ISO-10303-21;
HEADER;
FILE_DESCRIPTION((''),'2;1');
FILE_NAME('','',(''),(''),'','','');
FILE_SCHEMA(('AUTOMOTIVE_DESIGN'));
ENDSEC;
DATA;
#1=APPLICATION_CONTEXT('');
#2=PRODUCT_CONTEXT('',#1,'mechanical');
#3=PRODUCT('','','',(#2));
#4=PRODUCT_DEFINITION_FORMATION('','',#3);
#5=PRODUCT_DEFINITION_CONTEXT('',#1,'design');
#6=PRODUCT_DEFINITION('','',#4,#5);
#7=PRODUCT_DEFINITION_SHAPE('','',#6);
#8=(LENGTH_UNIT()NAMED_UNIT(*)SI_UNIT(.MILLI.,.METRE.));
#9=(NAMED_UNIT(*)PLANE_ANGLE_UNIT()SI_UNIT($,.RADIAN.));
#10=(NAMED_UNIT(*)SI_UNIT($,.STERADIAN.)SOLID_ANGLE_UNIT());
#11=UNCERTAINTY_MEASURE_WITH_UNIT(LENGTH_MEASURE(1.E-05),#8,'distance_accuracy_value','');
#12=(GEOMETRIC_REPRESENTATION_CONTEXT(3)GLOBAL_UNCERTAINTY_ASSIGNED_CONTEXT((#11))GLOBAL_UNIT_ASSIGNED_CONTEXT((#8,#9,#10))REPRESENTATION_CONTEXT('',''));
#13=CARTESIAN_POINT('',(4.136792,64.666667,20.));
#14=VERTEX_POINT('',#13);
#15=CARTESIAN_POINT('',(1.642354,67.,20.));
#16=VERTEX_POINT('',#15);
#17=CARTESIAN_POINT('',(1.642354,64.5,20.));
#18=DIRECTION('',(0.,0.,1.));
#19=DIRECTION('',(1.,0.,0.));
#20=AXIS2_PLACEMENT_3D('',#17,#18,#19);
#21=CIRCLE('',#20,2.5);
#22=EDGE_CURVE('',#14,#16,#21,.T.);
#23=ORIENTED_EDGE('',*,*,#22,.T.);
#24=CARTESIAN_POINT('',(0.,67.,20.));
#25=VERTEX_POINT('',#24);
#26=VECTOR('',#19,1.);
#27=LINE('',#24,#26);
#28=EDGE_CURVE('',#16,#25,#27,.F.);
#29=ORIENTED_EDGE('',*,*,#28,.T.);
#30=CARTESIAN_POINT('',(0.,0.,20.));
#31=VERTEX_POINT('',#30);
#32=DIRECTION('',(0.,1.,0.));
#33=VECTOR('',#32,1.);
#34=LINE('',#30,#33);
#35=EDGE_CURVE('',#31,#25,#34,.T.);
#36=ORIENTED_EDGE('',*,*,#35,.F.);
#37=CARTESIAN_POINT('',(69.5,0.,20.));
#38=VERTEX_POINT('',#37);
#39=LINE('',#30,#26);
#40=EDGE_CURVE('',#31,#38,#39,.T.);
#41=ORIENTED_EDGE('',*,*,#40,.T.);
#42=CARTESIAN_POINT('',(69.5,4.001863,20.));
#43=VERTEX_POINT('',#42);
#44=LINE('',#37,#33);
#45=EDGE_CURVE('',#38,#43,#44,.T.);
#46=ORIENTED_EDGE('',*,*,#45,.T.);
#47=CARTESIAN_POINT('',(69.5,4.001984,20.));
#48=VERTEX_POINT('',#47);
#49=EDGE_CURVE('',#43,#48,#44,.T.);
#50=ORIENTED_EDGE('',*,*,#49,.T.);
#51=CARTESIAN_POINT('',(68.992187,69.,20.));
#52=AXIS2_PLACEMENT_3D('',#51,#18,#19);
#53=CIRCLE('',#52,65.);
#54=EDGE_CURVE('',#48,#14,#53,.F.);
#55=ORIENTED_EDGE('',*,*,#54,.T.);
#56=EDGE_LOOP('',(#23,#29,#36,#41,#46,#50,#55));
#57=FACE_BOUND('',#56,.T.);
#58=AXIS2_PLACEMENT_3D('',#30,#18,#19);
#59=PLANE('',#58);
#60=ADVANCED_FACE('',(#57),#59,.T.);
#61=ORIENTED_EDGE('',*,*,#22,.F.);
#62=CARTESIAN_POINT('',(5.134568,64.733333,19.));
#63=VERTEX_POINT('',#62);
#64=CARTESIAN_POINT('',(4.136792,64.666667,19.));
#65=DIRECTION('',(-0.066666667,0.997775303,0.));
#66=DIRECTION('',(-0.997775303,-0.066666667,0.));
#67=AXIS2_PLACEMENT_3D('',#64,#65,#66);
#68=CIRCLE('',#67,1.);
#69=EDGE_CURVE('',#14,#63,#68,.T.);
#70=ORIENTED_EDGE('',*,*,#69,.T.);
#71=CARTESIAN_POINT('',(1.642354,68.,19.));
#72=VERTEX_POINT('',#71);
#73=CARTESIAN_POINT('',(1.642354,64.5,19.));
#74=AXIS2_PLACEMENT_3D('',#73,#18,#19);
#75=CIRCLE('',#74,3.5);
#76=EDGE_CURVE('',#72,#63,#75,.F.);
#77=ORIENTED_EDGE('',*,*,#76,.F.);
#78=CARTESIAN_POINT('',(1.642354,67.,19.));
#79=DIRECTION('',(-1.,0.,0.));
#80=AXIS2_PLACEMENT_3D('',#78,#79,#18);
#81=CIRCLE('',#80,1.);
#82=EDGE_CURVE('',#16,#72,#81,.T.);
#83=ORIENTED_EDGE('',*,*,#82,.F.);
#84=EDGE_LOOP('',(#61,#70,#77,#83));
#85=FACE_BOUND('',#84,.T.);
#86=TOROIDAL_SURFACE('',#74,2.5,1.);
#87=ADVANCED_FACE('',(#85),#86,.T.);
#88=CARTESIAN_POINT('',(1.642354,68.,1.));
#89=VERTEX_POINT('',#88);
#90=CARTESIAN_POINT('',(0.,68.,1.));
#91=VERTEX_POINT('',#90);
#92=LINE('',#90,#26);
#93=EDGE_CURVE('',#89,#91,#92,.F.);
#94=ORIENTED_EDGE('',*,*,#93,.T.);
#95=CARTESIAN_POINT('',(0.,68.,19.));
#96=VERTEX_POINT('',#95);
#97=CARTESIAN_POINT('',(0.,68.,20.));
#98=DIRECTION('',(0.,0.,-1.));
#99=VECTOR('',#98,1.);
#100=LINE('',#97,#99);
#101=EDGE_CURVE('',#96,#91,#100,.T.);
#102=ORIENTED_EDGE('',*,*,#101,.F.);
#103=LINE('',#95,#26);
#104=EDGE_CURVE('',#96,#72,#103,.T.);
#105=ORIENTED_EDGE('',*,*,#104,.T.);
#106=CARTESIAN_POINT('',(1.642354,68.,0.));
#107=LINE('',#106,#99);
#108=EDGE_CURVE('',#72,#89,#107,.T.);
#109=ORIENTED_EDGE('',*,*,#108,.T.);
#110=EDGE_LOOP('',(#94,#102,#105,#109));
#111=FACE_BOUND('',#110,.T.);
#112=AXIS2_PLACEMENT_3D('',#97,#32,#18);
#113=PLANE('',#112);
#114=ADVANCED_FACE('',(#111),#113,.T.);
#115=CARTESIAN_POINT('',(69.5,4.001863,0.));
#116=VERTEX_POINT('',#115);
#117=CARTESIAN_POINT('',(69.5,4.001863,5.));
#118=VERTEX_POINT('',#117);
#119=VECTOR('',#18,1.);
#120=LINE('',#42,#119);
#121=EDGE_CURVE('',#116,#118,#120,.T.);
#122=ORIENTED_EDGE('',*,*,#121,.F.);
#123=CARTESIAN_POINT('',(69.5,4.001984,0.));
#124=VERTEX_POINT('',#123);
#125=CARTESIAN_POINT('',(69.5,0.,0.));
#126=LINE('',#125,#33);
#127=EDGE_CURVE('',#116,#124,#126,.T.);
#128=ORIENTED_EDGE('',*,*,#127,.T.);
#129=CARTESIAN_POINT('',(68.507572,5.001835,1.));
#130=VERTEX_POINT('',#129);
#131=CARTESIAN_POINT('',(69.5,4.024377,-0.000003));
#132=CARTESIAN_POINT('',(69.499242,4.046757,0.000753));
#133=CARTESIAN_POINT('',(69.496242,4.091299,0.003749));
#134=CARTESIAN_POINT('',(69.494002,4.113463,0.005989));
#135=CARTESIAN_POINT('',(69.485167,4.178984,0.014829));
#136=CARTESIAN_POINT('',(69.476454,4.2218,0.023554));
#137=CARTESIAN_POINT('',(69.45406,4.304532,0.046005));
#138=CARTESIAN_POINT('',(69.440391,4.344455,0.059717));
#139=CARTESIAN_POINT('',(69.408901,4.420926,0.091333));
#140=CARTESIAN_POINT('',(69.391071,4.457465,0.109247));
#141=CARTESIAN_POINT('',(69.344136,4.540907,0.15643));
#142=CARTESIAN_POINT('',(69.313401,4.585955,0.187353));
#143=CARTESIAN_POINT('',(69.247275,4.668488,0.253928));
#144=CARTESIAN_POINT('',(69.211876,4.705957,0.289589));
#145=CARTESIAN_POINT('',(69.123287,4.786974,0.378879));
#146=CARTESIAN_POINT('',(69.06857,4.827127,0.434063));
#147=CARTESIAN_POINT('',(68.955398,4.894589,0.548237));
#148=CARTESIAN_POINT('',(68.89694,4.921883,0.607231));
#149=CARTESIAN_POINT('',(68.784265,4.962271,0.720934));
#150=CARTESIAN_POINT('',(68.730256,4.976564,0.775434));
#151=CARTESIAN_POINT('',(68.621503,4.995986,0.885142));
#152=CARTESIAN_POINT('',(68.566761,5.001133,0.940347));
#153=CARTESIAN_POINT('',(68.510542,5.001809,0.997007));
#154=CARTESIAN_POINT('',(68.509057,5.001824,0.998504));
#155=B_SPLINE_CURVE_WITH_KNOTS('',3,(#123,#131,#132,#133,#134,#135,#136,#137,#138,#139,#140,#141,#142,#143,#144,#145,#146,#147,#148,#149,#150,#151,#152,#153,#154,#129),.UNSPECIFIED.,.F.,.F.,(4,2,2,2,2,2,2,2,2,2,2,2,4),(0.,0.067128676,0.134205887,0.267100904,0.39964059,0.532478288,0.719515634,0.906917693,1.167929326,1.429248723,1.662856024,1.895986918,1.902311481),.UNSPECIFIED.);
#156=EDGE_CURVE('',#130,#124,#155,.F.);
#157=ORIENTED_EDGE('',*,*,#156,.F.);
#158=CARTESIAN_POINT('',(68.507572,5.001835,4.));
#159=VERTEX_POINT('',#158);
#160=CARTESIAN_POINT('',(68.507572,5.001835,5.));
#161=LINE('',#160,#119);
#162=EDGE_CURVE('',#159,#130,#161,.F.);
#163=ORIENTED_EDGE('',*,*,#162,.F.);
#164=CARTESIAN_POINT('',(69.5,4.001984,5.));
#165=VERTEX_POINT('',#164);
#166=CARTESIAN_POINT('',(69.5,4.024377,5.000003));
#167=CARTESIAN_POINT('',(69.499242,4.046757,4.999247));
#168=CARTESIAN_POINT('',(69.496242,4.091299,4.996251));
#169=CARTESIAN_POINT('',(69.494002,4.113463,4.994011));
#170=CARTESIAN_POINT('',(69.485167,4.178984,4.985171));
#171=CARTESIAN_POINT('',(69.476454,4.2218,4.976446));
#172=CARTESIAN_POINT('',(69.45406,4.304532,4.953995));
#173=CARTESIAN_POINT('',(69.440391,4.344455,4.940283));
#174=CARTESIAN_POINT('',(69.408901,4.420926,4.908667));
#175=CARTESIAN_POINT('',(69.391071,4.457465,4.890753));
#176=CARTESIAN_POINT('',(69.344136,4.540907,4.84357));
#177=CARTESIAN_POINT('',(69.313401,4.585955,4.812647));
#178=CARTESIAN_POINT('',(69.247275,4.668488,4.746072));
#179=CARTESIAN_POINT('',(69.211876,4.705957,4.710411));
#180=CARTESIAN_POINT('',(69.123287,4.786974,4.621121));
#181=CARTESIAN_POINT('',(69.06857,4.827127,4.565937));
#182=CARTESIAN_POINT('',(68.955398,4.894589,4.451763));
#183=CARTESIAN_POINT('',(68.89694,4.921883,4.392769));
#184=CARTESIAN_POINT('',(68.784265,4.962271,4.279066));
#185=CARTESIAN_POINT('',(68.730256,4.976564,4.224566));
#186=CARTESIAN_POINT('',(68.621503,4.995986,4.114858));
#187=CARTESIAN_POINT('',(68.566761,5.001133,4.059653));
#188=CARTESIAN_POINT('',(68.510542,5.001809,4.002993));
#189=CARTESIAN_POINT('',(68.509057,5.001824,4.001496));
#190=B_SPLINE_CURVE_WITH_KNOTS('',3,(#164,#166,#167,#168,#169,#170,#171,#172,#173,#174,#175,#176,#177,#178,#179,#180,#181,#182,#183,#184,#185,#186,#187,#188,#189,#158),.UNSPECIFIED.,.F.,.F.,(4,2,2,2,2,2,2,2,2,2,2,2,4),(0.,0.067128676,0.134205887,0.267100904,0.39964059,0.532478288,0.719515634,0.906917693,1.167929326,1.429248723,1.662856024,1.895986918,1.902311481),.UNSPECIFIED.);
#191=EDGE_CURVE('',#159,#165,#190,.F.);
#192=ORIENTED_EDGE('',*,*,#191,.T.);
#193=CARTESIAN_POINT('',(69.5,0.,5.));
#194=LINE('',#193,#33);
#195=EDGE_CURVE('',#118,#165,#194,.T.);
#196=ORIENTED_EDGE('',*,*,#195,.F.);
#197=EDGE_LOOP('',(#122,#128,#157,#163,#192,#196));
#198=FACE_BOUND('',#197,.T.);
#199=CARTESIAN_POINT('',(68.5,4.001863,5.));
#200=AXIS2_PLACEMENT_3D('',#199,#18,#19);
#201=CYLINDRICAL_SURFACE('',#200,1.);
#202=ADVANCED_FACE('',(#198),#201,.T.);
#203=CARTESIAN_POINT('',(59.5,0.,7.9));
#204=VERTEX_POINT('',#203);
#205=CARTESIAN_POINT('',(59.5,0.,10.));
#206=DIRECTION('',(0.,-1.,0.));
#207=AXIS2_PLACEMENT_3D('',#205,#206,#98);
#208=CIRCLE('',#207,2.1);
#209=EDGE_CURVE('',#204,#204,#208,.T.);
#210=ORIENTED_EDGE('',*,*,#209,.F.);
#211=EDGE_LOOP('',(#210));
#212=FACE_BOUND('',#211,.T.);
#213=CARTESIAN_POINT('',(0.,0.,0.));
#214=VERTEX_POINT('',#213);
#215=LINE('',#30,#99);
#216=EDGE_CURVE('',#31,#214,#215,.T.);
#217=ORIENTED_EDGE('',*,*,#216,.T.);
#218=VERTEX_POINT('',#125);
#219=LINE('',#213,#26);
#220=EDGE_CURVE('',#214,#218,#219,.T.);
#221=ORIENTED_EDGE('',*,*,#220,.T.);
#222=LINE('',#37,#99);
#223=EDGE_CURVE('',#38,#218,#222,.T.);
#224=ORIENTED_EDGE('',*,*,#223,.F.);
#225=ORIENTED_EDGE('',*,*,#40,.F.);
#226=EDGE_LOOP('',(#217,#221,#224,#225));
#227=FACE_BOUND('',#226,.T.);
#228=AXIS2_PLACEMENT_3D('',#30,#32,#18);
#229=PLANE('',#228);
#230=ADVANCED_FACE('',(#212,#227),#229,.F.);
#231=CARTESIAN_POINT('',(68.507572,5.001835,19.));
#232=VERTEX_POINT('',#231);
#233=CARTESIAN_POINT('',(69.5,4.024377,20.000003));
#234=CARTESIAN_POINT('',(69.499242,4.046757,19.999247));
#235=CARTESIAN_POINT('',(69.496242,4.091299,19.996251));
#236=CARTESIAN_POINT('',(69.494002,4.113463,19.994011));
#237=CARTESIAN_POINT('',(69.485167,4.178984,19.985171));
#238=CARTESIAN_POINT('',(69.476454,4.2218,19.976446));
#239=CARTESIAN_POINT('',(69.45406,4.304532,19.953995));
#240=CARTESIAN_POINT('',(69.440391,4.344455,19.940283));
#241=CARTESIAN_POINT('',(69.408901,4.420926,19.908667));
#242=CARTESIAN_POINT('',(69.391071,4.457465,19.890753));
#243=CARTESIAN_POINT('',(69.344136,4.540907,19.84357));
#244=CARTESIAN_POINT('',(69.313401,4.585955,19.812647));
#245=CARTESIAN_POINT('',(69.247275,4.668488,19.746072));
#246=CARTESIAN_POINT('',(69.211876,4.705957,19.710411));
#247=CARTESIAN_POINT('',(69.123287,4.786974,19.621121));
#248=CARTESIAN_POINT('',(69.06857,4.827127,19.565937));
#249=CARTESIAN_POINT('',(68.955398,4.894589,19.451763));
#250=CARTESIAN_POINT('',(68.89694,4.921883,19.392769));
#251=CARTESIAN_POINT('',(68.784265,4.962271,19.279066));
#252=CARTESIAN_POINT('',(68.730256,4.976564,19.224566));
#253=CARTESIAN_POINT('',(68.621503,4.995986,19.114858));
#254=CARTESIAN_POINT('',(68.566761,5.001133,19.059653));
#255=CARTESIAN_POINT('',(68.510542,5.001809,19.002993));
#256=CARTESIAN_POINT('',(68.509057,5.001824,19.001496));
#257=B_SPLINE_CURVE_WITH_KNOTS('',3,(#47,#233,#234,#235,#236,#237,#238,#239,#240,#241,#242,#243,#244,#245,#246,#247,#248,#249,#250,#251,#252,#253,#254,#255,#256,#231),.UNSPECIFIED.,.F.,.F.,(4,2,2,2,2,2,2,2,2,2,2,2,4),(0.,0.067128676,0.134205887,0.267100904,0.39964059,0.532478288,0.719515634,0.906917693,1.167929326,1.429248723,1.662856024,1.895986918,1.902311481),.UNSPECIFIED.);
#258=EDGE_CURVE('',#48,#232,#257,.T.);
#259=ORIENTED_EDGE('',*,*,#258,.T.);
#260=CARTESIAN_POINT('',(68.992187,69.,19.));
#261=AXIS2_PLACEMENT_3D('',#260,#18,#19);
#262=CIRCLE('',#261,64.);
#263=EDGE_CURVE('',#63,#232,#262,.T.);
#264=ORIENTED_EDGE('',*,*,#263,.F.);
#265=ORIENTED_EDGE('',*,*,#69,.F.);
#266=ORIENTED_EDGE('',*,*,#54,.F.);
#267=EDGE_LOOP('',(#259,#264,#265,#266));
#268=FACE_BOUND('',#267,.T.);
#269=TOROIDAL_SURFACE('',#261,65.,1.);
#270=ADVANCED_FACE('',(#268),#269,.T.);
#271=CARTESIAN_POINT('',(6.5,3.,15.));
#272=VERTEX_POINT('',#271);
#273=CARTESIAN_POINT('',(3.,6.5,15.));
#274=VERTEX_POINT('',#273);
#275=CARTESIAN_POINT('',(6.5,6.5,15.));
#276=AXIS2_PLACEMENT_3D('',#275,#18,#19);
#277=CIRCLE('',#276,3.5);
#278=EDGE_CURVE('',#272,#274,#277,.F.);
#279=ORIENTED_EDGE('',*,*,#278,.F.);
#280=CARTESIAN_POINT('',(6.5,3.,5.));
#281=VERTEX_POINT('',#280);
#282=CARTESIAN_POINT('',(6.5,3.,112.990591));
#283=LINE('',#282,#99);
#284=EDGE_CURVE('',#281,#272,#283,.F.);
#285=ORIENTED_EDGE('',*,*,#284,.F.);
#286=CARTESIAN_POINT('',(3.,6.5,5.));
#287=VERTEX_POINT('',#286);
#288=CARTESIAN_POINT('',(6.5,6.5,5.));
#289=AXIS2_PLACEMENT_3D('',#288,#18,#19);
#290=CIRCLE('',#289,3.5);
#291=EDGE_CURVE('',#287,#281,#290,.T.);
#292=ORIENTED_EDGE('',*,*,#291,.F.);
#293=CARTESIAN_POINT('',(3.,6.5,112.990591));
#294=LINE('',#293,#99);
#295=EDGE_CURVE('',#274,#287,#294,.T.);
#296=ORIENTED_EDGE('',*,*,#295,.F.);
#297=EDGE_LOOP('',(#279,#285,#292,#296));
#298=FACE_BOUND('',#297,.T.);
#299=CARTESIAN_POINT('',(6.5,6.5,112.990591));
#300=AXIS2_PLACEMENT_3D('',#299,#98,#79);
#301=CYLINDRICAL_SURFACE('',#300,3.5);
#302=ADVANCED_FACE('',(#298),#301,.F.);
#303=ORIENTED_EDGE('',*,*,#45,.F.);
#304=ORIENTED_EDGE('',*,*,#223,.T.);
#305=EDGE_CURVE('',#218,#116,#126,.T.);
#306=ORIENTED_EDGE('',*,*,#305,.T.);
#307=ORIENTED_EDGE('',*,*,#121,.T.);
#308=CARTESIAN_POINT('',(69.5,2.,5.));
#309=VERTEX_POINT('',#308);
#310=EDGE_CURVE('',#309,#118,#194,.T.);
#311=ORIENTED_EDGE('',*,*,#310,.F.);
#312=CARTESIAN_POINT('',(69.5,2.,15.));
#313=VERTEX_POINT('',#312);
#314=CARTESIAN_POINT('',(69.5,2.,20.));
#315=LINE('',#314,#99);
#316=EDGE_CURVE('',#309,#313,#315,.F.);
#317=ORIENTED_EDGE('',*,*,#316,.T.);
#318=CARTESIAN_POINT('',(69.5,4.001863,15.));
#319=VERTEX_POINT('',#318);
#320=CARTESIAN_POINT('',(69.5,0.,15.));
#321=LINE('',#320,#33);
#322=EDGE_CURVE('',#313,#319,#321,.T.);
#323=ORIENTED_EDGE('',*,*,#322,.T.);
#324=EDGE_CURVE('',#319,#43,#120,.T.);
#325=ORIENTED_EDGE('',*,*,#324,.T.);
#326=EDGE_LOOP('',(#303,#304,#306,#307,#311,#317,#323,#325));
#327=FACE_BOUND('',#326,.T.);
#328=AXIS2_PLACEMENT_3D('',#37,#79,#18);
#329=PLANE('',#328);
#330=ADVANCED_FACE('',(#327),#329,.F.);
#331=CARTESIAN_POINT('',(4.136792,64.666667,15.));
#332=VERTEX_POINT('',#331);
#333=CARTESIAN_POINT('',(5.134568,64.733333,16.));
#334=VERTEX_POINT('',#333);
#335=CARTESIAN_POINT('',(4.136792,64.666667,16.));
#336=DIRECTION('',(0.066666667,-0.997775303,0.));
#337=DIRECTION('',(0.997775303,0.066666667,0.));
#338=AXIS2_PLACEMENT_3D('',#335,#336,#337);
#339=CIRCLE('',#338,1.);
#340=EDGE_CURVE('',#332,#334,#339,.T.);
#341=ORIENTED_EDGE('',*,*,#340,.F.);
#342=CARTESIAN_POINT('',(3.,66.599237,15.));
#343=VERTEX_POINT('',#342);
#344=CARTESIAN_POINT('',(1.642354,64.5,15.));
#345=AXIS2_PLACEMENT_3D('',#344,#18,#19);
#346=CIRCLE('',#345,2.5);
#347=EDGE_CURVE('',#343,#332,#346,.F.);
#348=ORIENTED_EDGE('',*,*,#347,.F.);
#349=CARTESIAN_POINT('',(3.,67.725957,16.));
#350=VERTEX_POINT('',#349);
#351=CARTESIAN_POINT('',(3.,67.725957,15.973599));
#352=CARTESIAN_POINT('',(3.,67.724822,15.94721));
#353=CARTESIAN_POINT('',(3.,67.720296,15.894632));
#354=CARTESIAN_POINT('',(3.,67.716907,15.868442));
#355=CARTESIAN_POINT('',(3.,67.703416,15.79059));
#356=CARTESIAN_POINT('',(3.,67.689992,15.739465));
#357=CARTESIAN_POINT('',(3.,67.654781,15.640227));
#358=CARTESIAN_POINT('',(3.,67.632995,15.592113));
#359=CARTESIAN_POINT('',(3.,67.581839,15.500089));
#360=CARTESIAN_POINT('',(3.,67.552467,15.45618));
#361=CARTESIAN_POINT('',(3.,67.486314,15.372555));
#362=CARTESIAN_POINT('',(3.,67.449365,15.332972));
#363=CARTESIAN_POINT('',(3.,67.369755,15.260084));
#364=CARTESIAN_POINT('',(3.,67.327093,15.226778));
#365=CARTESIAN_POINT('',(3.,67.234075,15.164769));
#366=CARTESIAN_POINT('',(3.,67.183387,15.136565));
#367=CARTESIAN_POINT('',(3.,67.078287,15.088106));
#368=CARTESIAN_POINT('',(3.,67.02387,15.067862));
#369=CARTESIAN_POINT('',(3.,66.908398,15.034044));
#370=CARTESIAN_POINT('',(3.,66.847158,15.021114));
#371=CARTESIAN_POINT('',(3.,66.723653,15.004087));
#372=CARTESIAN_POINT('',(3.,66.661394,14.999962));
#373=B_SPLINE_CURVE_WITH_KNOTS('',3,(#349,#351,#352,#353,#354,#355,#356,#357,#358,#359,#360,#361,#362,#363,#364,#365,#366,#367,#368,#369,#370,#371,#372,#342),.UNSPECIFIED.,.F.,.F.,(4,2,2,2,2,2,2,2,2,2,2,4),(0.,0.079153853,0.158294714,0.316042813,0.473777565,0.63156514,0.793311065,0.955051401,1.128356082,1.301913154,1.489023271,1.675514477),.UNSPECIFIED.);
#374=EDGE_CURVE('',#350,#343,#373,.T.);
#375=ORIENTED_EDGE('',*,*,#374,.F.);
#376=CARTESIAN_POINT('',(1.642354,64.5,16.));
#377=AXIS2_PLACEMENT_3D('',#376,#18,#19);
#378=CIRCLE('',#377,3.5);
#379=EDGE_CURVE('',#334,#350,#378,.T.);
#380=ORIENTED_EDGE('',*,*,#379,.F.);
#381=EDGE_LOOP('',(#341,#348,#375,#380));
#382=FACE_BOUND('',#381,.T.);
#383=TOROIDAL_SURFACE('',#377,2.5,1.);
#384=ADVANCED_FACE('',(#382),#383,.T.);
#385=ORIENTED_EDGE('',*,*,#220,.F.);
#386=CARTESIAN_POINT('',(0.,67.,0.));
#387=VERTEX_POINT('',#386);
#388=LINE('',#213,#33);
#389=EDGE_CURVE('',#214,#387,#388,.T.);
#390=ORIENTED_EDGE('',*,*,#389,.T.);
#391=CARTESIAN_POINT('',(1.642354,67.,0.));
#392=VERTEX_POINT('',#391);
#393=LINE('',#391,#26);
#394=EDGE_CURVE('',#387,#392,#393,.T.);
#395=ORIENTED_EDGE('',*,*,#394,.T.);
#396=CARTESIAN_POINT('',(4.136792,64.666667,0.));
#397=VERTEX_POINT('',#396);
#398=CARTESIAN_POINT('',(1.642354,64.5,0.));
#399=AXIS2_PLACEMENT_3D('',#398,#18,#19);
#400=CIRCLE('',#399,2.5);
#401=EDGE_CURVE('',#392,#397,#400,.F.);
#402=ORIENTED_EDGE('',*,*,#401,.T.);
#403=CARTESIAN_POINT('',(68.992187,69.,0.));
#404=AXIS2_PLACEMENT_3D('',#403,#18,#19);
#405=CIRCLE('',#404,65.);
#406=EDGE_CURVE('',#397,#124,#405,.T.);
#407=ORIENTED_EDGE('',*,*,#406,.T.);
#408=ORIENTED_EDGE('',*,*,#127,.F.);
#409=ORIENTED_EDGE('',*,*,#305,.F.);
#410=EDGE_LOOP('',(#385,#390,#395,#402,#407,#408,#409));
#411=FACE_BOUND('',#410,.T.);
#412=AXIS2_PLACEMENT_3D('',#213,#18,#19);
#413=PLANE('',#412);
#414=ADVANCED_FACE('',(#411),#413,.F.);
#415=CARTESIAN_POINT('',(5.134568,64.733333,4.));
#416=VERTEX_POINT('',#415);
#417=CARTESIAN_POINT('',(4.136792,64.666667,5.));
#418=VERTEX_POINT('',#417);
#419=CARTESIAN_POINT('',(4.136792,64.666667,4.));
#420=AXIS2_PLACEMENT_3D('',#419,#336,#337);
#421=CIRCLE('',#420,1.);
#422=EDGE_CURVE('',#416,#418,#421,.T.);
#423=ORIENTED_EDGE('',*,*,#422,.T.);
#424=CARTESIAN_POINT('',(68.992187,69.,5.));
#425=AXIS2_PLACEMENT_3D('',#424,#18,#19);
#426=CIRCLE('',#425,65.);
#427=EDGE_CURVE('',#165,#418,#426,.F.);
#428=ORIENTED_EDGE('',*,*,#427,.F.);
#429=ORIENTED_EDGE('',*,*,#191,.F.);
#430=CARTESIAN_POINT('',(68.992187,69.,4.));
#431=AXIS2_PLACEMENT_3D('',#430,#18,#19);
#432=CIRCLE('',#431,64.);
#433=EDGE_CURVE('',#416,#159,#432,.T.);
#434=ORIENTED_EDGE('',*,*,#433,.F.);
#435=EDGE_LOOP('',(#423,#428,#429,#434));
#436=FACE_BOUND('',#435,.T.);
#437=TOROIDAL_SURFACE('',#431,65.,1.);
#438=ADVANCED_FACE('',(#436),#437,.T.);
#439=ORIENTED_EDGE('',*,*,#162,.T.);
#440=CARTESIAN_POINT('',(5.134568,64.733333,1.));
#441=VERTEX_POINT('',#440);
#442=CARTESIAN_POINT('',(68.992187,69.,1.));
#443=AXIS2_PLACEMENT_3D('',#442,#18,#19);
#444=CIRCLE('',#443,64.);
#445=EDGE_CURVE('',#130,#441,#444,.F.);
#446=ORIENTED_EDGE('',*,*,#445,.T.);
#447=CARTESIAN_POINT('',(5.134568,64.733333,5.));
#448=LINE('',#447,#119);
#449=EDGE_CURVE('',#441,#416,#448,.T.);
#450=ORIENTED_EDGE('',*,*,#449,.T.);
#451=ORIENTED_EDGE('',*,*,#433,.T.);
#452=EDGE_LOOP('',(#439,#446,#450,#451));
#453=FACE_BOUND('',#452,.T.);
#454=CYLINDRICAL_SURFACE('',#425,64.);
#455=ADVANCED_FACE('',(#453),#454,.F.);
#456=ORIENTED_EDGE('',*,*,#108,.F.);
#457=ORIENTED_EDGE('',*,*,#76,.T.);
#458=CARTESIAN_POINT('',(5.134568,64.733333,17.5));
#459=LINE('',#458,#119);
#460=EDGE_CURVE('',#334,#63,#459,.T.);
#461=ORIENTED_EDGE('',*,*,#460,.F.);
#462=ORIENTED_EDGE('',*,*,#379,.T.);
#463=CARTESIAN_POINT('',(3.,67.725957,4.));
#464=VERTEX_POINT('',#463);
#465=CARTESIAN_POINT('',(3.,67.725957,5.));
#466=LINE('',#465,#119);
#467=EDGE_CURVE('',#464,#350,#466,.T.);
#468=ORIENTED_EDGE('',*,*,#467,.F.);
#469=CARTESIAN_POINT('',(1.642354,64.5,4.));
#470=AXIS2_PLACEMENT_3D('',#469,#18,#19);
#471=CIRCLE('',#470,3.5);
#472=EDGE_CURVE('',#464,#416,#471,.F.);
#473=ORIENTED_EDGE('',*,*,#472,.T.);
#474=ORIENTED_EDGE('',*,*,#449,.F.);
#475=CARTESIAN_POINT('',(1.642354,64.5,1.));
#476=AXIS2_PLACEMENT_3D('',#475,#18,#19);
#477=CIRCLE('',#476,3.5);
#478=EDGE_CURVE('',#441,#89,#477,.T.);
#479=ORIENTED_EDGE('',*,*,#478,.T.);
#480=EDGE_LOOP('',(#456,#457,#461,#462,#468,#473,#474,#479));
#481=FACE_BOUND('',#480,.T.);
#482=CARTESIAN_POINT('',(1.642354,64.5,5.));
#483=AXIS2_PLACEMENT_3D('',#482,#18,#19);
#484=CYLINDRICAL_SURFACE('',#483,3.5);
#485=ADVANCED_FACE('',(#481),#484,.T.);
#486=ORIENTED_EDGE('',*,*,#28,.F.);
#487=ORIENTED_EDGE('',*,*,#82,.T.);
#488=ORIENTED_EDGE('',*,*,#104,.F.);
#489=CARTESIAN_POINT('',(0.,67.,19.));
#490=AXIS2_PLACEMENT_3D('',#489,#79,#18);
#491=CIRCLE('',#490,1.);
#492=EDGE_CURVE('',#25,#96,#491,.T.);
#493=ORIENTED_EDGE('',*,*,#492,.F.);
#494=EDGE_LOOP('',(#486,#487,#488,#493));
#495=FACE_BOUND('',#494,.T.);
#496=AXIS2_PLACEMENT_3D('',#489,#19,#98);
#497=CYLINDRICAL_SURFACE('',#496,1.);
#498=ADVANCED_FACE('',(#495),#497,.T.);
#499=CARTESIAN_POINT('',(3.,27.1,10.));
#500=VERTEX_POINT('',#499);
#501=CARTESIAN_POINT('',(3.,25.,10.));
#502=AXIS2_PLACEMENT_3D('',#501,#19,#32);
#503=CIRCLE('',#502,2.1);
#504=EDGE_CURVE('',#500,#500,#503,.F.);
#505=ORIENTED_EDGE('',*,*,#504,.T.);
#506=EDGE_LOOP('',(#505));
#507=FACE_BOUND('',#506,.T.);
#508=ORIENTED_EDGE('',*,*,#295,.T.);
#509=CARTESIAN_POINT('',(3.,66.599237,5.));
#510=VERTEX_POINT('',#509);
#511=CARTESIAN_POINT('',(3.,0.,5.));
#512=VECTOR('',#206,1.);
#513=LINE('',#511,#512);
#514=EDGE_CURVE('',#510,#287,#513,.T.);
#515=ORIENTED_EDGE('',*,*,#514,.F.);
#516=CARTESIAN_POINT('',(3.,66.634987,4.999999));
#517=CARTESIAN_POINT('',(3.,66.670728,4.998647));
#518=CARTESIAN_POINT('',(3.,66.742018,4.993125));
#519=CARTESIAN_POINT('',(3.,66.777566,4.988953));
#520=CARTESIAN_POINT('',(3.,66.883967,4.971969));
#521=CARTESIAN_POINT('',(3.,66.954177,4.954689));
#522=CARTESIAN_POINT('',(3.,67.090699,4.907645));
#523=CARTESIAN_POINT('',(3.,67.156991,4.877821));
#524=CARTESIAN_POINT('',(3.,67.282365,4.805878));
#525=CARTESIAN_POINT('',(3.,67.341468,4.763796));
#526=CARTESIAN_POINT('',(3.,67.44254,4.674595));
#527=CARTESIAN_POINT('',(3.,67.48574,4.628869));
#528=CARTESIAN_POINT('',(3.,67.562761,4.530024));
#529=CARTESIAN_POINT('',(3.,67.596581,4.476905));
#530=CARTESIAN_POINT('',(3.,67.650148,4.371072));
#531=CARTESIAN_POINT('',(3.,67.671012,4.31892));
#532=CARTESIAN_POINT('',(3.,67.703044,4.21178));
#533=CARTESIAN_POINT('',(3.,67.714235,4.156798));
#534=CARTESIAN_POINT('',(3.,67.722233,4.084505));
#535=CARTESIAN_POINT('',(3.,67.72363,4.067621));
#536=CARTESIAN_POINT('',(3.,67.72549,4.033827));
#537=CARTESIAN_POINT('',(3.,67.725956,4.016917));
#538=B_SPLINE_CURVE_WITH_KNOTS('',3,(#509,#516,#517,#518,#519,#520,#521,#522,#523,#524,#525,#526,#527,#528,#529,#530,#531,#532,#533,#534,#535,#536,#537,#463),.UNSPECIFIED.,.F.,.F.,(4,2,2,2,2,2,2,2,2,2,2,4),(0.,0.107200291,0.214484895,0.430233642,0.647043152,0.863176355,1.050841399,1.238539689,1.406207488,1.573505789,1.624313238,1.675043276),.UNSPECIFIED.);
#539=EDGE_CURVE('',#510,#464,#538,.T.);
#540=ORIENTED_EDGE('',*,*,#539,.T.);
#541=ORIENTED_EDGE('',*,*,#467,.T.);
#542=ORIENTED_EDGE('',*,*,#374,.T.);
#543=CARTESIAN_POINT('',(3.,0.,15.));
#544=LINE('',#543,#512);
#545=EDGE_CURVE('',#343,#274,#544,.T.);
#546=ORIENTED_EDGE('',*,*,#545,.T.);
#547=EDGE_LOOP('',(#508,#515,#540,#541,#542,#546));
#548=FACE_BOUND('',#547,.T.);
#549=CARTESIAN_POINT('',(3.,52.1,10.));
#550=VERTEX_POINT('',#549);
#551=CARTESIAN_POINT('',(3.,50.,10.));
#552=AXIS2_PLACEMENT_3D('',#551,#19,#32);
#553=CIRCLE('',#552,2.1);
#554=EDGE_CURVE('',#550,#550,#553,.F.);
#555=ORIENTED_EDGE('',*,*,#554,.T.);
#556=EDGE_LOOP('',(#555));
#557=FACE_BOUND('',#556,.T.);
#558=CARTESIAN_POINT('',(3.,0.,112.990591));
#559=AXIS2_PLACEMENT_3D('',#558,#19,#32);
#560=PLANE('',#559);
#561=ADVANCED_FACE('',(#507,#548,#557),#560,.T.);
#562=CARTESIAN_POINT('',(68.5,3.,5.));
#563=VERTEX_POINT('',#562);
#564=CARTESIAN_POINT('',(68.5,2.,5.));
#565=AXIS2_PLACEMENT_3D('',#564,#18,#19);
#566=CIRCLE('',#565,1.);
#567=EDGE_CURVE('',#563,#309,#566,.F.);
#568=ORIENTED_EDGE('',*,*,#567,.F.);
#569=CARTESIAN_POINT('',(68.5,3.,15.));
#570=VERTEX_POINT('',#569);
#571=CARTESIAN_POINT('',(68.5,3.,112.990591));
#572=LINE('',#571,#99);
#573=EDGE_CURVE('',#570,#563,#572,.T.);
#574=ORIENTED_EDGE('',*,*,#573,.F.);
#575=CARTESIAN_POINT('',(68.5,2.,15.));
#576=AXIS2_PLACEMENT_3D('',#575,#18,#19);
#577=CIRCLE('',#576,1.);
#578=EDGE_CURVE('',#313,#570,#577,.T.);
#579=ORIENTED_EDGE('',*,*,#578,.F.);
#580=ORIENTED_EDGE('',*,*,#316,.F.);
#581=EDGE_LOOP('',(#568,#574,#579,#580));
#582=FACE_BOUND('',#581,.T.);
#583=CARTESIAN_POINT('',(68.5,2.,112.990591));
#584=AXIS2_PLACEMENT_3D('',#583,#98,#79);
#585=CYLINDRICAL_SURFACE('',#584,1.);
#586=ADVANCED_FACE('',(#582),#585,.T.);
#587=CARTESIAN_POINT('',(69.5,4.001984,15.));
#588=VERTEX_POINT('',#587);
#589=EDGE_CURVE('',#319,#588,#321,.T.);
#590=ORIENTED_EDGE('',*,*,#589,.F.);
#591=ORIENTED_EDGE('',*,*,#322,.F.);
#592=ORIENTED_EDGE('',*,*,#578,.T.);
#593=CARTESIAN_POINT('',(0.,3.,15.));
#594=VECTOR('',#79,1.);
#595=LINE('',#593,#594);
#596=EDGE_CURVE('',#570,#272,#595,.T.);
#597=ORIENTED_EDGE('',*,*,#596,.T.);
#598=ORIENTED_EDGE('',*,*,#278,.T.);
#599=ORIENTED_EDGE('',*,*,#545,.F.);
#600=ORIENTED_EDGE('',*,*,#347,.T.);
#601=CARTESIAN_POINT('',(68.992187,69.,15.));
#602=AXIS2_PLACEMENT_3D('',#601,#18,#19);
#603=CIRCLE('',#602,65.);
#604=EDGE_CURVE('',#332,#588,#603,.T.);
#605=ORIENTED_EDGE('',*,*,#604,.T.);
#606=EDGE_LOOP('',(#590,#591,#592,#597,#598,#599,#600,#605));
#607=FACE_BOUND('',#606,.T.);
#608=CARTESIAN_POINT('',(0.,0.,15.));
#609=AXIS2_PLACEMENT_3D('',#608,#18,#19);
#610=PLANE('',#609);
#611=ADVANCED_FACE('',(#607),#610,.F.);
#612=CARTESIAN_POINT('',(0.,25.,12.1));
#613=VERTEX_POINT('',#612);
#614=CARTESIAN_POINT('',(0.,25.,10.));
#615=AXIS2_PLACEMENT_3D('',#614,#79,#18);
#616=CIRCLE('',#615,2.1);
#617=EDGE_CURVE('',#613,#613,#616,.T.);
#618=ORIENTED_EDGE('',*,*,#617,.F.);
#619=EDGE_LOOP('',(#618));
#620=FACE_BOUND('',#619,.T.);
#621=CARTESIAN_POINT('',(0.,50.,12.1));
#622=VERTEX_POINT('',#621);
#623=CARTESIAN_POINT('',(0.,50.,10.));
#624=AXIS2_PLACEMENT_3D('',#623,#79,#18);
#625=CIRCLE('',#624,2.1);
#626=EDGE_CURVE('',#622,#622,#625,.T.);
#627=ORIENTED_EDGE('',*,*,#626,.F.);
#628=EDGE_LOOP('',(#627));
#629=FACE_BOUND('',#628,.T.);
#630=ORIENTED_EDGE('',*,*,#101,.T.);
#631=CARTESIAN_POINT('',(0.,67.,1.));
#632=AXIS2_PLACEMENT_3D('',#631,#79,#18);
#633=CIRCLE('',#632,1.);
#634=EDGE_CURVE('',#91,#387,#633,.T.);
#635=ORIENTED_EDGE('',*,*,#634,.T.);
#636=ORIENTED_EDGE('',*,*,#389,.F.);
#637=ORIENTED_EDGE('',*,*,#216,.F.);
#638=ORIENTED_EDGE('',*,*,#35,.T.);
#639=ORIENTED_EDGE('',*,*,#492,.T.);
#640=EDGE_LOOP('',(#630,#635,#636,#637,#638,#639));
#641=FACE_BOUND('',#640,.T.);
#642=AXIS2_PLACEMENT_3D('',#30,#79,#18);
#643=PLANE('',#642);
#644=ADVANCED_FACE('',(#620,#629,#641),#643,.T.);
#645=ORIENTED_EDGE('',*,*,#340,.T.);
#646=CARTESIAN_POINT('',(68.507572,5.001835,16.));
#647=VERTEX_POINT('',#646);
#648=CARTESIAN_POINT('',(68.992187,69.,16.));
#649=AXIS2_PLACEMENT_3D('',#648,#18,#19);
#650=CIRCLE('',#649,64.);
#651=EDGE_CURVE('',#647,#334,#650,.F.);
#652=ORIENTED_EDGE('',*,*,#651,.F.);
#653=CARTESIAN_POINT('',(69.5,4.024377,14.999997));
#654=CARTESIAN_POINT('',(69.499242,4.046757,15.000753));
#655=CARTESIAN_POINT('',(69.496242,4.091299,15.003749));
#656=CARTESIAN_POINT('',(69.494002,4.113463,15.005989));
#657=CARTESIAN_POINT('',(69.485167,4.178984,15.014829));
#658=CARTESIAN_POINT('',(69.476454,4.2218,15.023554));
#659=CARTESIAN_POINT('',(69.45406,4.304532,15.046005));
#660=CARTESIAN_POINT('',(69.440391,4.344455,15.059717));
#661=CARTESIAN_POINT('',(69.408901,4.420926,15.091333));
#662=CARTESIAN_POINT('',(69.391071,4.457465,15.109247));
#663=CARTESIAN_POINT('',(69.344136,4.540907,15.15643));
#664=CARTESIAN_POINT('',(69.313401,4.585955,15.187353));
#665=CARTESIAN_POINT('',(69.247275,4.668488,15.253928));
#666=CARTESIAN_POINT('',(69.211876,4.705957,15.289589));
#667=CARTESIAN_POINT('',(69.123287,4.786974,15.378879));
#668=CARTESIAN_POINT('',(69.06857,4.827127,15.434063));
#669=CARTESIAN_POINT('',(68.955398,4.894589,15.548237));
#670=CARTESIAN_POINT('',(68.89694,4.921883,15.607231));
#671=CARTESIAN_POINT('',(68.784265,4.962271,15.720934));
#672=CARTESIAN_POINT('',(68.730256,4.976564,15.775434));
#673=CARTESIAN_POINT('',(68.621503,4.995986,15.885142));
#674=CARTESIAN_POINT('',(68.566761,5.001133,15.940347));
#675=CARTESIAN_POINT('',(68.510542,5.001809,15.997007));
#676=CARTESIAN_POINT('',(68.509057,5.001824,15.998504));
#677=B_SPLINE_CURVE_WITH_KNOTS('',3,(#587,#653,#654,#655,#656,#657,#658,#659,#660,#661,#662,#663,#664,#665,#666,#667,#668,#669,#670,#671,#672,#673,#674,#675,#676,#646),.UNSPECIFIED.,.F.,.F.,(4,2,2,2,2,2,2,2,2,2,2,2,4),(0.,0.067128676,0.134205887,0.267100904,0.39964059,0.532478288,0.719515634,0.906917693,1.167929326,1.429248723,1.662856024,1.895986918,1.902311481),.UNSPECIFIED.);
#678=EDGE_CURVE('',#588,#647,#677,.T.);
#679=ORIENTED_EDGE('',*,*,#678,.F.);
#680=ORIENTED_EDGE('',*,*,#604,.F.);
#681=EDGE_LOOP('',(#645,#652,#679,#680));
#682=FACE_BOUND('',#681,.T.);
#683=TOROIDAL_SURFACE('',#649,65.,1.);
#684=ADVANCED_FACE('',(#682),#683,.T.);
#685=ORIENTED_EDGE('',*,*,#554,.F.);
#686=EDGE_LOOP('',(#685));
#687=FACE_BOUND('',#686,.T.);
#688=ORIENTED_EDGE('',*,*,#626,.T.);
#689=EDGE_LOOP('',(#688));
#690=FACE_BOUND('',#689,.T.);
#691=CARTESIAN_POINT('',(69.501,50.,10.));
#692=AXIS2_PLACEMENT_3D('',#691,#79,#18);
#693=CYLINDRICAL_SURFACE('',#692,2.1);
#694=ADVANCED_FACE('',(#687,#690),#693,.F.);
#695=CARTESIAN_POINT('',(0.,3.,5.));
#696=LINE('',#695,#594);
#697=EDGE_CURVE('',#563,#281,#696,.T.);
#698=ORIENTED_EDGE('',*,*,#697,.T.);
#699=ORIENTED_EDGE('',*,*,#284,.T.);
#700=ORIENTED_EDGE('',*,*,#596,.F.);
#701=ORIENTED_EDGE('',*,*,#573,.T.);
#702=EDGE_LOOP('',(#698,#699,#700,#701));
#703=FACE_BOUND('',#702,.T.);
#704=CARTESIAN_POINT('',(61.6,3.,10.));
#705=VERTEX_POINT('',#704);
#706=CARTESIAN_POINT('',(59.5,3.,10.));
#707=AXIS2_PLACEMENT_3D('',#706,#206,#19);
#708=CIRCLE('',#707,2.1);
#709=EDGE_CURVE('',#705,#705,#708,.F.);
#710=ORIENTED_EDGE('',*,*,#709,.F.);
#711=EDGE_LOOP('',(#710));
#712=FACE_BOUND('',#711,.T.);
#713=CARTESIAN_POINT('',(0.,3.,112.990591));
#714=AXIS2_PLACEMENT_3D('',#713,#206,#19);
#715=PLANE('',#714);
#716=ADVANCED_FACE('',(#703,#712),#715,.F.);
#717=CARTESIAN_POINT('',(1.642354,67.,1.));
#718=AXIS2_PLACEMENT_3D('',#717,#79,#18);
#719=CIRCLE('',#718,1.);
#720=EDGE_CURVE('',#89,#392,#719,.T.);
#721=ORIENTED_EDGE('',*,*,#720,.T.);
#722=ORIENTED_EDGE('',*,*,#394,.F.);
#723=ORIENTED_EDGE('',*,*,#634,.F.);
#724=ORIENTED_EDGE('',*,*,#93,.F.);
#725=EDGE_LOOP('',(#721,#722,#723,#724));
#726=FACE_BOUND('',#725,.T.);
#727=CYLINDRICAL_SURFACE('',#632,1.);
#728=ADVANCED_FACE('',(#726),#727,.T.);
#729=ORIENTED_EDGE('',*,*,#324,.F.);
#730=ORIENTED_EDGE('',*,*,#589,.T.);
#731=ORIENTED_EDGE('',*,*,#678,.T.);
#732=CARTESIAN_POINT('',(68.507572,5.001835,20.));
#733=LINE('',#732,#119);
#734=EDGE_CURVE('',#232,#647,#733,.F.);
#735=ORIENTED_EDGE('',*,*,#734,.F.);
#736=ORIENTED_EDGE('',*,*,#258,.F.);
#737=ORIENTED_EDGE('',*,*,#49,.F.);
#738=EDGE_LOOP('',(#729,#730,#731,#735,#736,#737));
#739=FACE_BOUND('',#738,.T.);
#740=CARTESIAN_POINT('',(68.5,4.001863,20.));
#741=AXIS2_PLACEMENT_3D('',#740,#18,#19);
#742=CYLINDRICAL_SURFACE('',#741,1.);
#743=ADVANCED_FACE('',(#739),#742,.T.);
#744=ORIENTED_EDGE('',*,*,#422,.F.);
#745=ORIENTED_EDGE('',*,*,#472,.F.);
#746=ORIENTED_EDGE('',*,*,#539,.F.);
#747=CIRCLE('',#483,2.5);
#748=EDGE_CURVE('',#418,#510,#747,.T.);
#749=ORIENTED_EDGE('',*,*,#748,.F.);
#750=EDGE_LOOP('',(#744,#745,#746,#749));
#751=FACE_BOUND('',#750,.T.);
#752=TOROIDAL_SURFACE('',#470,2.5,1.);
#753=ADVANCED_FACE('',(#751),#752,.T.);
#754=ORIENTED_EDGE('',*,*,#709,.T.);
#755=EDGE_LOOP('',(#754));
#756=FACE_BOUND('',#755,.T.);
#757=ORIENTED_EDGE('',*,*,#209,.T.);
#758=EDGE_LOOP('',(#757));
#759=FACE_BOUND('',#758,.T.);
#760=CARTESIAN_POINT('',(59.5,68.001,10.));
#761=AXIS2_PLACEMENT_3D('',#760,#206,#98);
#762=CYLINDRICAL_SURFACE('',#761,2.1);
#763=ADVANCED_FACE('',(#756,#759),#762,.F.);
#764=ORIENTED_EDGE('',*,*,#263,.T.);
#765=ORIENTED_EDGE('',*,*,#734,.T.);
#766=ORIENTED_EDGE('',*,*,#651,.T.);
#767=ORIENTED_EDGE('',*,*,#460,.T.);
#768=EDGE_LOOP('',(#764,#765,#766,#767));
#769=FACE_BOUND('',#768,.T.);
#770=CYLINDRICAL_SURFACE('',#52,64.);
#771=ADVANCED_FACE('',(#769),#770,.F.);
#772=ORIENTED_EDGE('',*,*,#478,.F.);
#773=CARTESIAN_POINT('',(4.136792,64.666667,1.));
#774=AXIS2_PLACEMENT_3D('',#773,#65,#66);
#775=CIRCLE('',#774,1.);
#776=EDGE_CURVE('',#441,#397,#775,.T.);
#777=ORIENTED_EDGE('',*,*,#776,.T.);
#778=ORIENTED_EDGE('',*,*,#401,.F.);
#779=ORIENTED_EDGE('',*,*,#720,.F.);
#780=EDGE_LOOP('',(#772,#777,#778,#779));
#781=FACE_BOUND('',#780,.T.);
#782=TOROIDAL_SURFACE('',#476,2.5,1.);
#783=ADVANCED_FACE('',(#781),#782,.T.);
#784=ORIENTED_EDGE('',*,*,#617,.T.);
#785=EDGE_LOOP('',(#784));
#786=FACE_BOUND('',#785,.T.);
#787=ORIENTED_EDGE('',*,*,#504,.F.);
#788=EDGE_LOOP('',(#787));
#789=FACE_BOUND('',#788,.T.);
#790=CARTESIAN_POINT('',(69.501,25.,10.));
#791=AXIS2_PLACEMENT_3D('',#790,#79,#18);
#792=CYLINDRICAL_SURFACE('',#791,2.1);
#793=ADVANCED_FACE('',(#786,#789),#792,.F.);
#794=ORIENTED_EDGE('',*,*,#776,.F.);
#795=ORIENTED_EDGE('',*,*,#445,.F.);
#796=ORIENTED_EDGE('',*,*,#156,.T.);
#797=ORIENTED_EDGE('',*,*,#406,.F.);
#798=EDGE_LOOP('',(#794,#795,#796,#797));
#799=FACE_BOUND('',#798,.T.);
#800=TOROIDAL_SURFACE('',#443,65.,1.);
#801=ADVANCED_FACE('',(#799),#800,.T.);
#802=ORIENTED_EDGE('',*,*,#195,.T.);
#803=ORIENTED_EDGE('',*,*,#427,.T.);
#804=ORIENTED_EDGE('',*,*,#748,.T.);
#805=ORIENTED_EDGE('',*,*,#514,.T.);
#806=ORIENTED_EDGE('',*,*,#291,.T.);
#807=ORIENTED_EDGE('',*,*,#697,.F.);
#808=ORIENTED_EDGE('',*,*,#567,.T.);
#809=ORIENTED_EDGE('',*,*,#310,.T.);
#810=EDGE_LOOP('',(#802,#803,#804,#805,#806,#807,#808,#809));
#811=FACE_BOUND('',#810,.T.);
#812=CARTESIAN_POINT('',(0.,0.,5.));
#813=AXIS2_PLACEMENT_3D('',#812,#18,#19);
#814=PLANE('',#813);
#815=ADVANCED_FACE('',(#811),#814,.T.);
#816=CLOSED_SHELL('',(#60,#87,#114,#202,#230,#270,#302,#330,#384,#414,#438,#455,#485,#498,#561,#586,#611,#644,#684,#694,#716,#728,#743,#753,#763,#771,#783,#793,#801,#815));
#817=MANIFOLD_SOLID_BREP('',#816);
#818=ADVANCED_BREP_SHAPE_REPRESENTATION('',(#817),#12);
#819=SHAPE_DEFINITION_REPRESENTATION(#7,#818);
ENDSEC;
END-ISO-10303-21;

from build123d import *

# Parameters (mm, degrees)
BOSS_EXTRUDE1_DEPTH = 20
CUT_EXTRUDE1_DEPTH  = 15
BOSS_EXTRUDE2_DEPTH = 5
CUT_EXTRUDE2_REACH  = 101.269
SKETCH2_R           = 2.100000000000004
CUT_EXTRUDE3_REACH  = 101.269
SKETCH3_R           = 2.100000000000001
SKETCH3_R_2         = 2.099999999999995
FILLET2_R           = 64
FILLET3_START       = -1
FILLET3_DEPTH       = 22
FILLET3_START_2     = 2.0548
FILLET3_2_DEPTH     = 16
FILLET4_R           = 1


with BuildPart() as part:
    # Sketch1 → Boss-Extrude1 (new body)
    with BuildSketch(Plane.XY):
        Polygon((69.5, 5.000000000000004), (5, 5), (5.000000000000004, 67.99999999999999), (0, 68), (0, 0), (69.49999999999999, 0), align=None)
    extrude(amount=BOSS_EXTRUDE1_DEPTH)

    # Sketch1<3> → Cut-Extrude1 (cut)
    with BuildSketch(Plane.XY):
        Polygon((69.5, 5.000000000000004), (5, 5), (5.000000000000004, 67.99999999999999), (3.0000000000000027, 68), (3.000000000000001, 3), (69.5, 3.000000000000002), align=None)
    extrude(amount=CUT_EXTRUDE1_DEPTH, mode=Mode.SUBTRACT)

    # Sketch1<4> → Boss-Extrude2 (add)
    with BuildSketch(Plane.XY):
        Polygon((69.5, 5.000000000000004), (5, 5), (5.000000000000004, 67.99999999999999), (3.0000000000000027, 68), (3.000000000000001, 3), (69.5, 3.000000000000002), align=None)
    extrude(amount=BOSS_EXTRUDE2_DEPTH)

    # Sketch2 → Cut-Extrude2 (cut, up to next)
    with BuildSketch(Plane.XZ, mode=Mode.PRIVATE) as cut_extrude2_sk1:
        with Locations(Location((59.5, 10, 0), (0, 0, 270))):
            Circle(SKETCH2_R)
    cut_extrude2_tool1 = extrude(cut_extrude2_sk1.sketch, amount=-CUT_EXTRUDE2_REACH, mode=Mode.PRIVATE) & part.part
    add(cut_extrude2_tool1.solids().sort_by_distance((59.5, 0, 10))[0], mode=Mode.SUBTRACT)

    # Sketch3 → Cut-Extrude3 (cut, up to next)
    with BuildSketch(Plane.ZY, mode=Mode.PRIVATE) as cut_extrude3_sk1:
        with Locations((10, 24.999999999999996)):
            Circle(SKETCH3_R)
    cut_extrude3_tool1 = extrude(cut_extrude3_sk1.sketch, amount=-CUT_EXTRUDE3_REACH, mode=Mode.PRIVATE) & part.part
    # Sketch3 → Cut-Extrude3 (cut, up to next)
    with BuildSketch(Plane.ZY, mode=Mode.PRIVATE) as cut_extrude3_sk2:
        with Locations((10, 50)):
            Circle(SKETCH3_R_2)
    cut_extrude3_tool2 = extrude(cut_extrude3_sk2.sketch, amount=-CUT_EXTRUDE3_REACH, mode=Mode.PRIVATE) & part.part
    add(cut_extrude3_tool1.solids().sort_by_distance((0, 25, 10))[0], mode=Mode.SUBTRACT)
    add(cut_extrude3_tool2.solids().sort_by_distance((0, 50, 10))[0], mode=Mode.SUBTRACT)

    # Fillet2
    # the kernel refuses this fillet: 64 mm, written as the material it adds along each edge
    with BuildSketch(Plane(origin=(5.000000000000001, 5, -144.98046755776159), x_dir=(1, 0, 0), z_dir=(0, 0, 1))) as fillet2_piece_1_section:
        with BuildLine():
            CenterArc((63.992187023104634, 64), FILLET2_R, 180.89528298657015, 89.10471701342988)
            Line((6.22e-15, 62.999999999999986), (-1.2798437404620864, 62.97999999999999))
            ThreePointArc((-1.2798437404620864, 62.97999999999999), (-1.2799999999999976, 31.499999999999993), (-1.2800000000000002, 0))
            Line((-1.2800000000000002, 0), (0, -1.2800000000000002))
            Line((0, -1.2800000000000002), (63.992187023104634, -1.2800000000000002))
            Line((63.992187023104634, -1.2800000000000002), (63.992187023104634, 0))
        make_face()
    fillet2_piece_1 = extrude(amount=164.98046755776159, mode=Mode.PRIVATE)
    fillet2_piece_1 = split(fillet2_piece_1, bisect_by=Plane(origin=(5.000000000000001, 5, 0), z_dir=(0, 0, 1)), keep=Keep.TOP, mode=Mode.PRIVATE)
    fillet2_piece_1 = split(fillet2_piece_1, bisect_by=Plane(origin=(5.000000000000001, 5, 5), z_dir=(0, 0, -1)), keep=Keep.TOP, mode=Mode.PRIVATE)
    add(fillet2_piece_1)
    with BuildSketch(Plane(origin=(5.000000000000001, 5, 15), x_dir=(1, 0, 0), z_dir=(0, 0, 1))) as fillet2_piece_2:
        with BuildLine():
            CenterArc((63.992187023104634, 64), FILLET2_R, 180.89528298657015, 89.10471701342988)
            Line((6.22e-15, 62.999999999999986), (-1.2798437404620864, 62.97999999999999))
            ThreePointArc((-1.2798437404620864, 62.97999999999999), (-1.2799999999999976, 31.499999999999993), (-1.2800000000000002, 0))
            Line((-1.2800000000000002, 0), (0, -1.2800000000000002))
            Line((0, -1.2800000000000002), (63.992187023104634, -1.2800000000000002))
            Line((63.992187023104634, -1.2800000000000002), (63.992187023104634, 0))
        make_face()
    extrude(amount=5)
    with BuildSketch(Plane(origin=(5.000000000000001, 5, 0), x_dir=(1, 0, 0), z_dir=(0, 0, 1))) as fillet2_piece_3:
        with BuildLine():
            CenterArc((63.992187023104634, 64), FILLET2_R, 180.89528298657012, 89.10471701342988)
            Line((6.22e-15, 63), (-1.2798437404620864, 62.980000000000004))
            ThreePointArc((-1.2798437404620864, 62.980000000000004), (-1.2799999999999976, 31.5), (-1.2800000000000002, 0))
            Line((-1.2800000000000002, 0), (0, -1.2800000000000002))
            Line((0, -1.2800000000000002), (63.992187023104634, -1.2800000000000002))
            Line((63.992187023104634, -1.2800000000000002), (63.992187023104634, 0))
        make_face()
    extrude(amount=5)
    with BuildSketch(Plane(origin=(5.000000000000001, 5, 0), x_dir=(1, 0, 0), z_dir=(0, 0, 1))) as fillet2_piece_4_section:
        with BuildLine():
            CenterArc((63.992187023104634, 64), FILLET2_R, 180.89528298657012, 89.10471701342988)
            Line((6.22e-15, 63), (-1.2798437404620864, 62.980000000000004))
            ThreePointArc((-1.2798437404620864, 62.980000000000004), (-1.2799999999999976, 31.5), (-1.2800000000000002, 0))
            Line((-1.2800000000000002, 0), (0, -1.2800000000000002))
            Line((0, -1.2800000000000002), (63.992187023104634, -1.2800000000000002))
            Line((63.992187023104634, -1.2800000000000002), (63.992187023104634, 0))
        make_face()
    fillet2_piece_4 = extrude(amount=164.98046755776159, mode=Mode.PRIVATE)
    fillet2_piece_4 = split(fillet2_piece_4, bisect_by=Plane(origin=(5.000000000000001, 5, 15), z_dir=(0, 0, 1)), keep=Keep.TOP, mode=Mode.PRIVATE)
    fillet2_piece_4 = split(fillet2_piece_4, bisect_by=Plane(origin=(5.000000000000001, 5, 20), z_dir=(0, 0, -1)), keep=Keep.TOP, mode=Mode.PRIVATE)
    add(fillet2_piece_4)

    # Fillet3: read off the stored shape, not the designer's step
    # Fillet3 outline → Fillet3 (cut)
    with BuildSketch(Plane.XY.offset(FILLET3_START)):
        with BuildLine():
            ThreePointArc((5.134567622, 64.733333333), (5.046420717, 66.365807229), (5, 68))
            Line((5, 68), (1.642354061, 68))
            ThreePointArc((1.642354061, 68), (4.03330924, 67.056038602), (5.134567622, 64.733333333))
        make_face()
    extrude(amount=FILLET3_DEPTH, mode=Mode.SUBTRACT)

    # Fillet3 2 outline → Fillet3 2 (add)
    with BuildSketch(Plane.XY.offset(FILLET3_START_2)):
        with BuildLine():
            ThreePointArc((6.5, 3), (4.025126266, 4.025126266), (3, 6.5))
            Line((3, 6.5), (3, 3))
            Line((3, 3), (6.5, 3))
        make_face()
    extrude(amount=FILLET3_2_DEPTH)

    # Fillet4
    # the kernel refuses this fillet: 1 mm, written as the material it takes off along each edge
    with BuildSketch(Plane(origin=(1.6423540609999998, 68, 0), x_dir=(0, 0, 1), z_dir=(-1, 0, 0))) as fillet4_piece_1:
        with BuildLine():
            CenterArc((FILLET4_R, -FILLET4_R), FILLET4_R, 90, 90)
            Line((-1.1e-16, -FILLET4_R), (0, 0))
            Line((0, 0), (FILLET4_R, 0))
        make_face()
    extrude(amount=4.142354061, mode=Mode.SUBTRACT)
    with BuildSketch(Plane(origin=(1.6423540609999998, 68, 20), x_dir=(-2.84e-15, -1, 0), z_dir=(-1, 2.84e-15, 0))) as fillet4_piece_2:
        with BuildLine():
            CenterArc((FILLET4_R, -FILLET4_R), FILLET4_R, 90, 90)
            Line((0, -FILLET4_R), (0, 0))
            Line((0, 0), (FILLET4_R, 0))
        make_face()
    extrude(amount=4.142354061, mode=Mode.SUBTRACT)
    with BuildSketch(Plane(origin=(68.992187023105, 69, 0), x_dir=(-2.2e-16, -1, 0), z_dir=(1, -2.2e-16, 0))) as fillet4_piece_3:
        with BuildLine():
            CenterArc((64 + FILLET4_R, -FILLET4_R), FILLET4_R, 90, 90)
            Line((64, -FILLET4_R), (64, 0))
            Line((64, 0), (64 + FILLET4_R, 0))
        make_face()
    revolve(axis=Axis((68.992187023105, 69, 0), (0, 0, -1)), revolution_arc=86.1774462704384, mode=Mode.SUBTRACT)
    with BuildSketch(Plane(origin=(68.992187023105, 69, 15), x_dir=(-0.9977753031393836, -0.06666666667166976, 0), z_dir=(-0.06666666667166976, 0.9977753031393836, 0))) as fillet4_piece_4:
        with BuildLine():
            CenterArc((64.00000000000001 + FILLET4_R, FILLET4_R), FILLET4_R, 180, 90)
            Line((64.00000000000001 + FILLET4_R, 0), (64.00000000000001, 0))
            Line((64.00000000000001, 0), (64, FILLET4_R))
        make_face()
    revolve(axis=Axis((68.992187023105, 69, 15), (0, 0, 1)), revolution_arc=86.17744627043835, mode=Mode.SUBTRACT)
    with BuildSketch(Plane(origin=(68.992187023105, 69, 20), x_dir=(-0.9977753031393836, -0.06666666667166976, 0), z_dir=(-0.06666666667166976, 0.9977753031393836, 0))) as fillet4_piece_5:
        with BuildLine():
            CenterArc((64.00000000000001 + FILLET4_R, -FILLET4_R), FILLET4_R, 90, 90)
            Line((64.00000000000001 + FILLET4_R, 0), (64.00000000000001, 0))
            Line((64.00000000000001, 0), (64, -FILLET4_R))
        make_face()
    revolve(axis=Axis((68.992187023105, 69, 20), (0, 0, 1)), revolution_arc=86.17744627043835, mode=Mode.SUBTRACT)
    with BuildSketch(Plane(origin=(69.5, 3.0000000000000027, 5), x_dir=(-1, -4.4e-16, 0), z_dir=(0, 0, 1))) as fillet4_piece_6:
        with BuildLine():
            CenterArc((FILLET4_R, FILLET4_R), FILLET4_R, 179.99999999999983, 90.00000000000011)
            Line((4.4e-16, FILLET4_R), (0, 0))
            Line((0, 0), (FILLET4_R, 0))
        make_face()
    extrude(amount=10, mode=Mode.SUBTRACT)
    with BuildSketch(Plane(origin=(68.992187023105, 69, 5), x_dir=(6.7e-16, -1, 0), z_dir=(1, 6.7e-16, 0))) as fillet4_piece_7:
        with BuildLine():
            CenterArc((64 + FILLET4_R, FILLET4_R), FILLET4_R, 180, 90)
            Line((64 + FILLET4_R, 0), (64, 0))
            Line((64, 0), (64, FILLET4_R))
        make_face()
    revolve(axis=Axis((68.992187023105, 69, 5), (0, 0, -1)), revolution_arc=86.17744627043844, mode=Mode.SUBTRACT)
    with BuildSketch(Plane(origin=(1.6423540620579629, 64.50000000114308, 0), x_dir=(-3.022750939428944e-10, 1.0, 0), z_dir=(-1.0, -3.022750939428944e-10, 0))) as fillet4_piece_8:
        with BuildLine():
            CenterArc((3.4999999988569215 - FILLET4_R, -FILLET4_R), FILLET4_R, 0, 90)
            Line((3.4999999988569215 - FILLET4_R, 0), (3.4999999988569215, 0))
            Line((3.4999999988569215, 0), (3.4999999988569215, -FILLET4_R))
        make_face()
    revolve(axis=Axis((1.6423540620579629, 64.50000000114308, 0), (0, 0, -1)), revolution_arc=86.17744631101748, mode=Mode.SUBTRACT)
    with BuildSketch(Plane(origin=(1.6423540620579629, 64.50000000114308, 20), x_dir=(-3.022750939428944e-10, 1.0, 0), z_dir=(-1.0, -3.022750939428944e-10, 0))) as fillet4_piece_9:
        with BuildLine():
            CenterArc((3.4999999988569215 - FILLET4_R, FILLET4_R), FILLET4_R, 270, 90)
            Line((3.4999999988569215, FILLET4_R), (3.4999999988569215, 0))
            Line((3.4999999988569215, 0), (3.4999999988569215 - FILLET4_R, 0))
        make_face()
    revolve(axis=Axis((1.6423540620579629, 64.50000000114308, 20), (0, 0, -1)), revolution_arc=86.17744631101748, mode=Mode.SUBTRACT)
    with BuildSketch(Plane(origin=(1.6423540620579629, 64.50000000114308, 15), x_dir=(-0.31084032918327265, 0.9504621453552133, 0), z_dir=(-0.9504621453552133, -0.31084032918327265, 0))) as fillet4_piece_10_section:
        with BuildLine():
            CenterArc((3.4999999988569215 - FILLET4_R, -FILLET4_R), FILLET4_R, 0, 90)
            Line((3.4999999988569215, -FILLET4_R), (3.4999999988569215, 0))
            Line((3.4999999988569215, 0), (3.4999999988569215 - FILLET4_R, 0))
        make_face()
    fillet4_piece_10 = revolve(axis=Axis((1.6423540620579629, 64.50000000114308, 15), (0, 0, -1)), revolution_arc=104.28732621151866, mode=Mode.PRIVATE)
    fillet4_piece_10 = split(fillet4_piece_10, bisect_by=Plane(origin=(3.0000000000000027, 64.50000000114308, 15), z_dir=(1, -3e-17, 0)), keep=Keep.TOP, mode=Mode.PRIVATE)
    add(fillet4_piece_10, mode=Mode.SUBTRACT)
    with BuildSketch(Plane(origin=(1.6423540620579629, 64.50000000114308, 5), x_dir=(-0.31084032918327265, 0.9504621453552133, 0), z_dir=(-0.9504621453552133, -0.31084032918327265, 0))) as fillet4_piece_11_section:
        with BuildLine():
            CenterArc((3.4999999988569215 - FILLET4_R, FILLET4_R), FILLET4_R, 270, 90)
            Line((3.4999999988569215 - FILLET4_R, 0), (3.4999999988569215, 0))
            Line((3.4999999988569215, 0), (3.499999998856922, FILLET4_R))
        make_face()
    fillet4_piece_11 = revolve(axis=Axis((1.6423540620579629, 64.50000000114308, 5), (0, 0, -1)), revolution_arc=104.28732621151866, mode=Mode.PRIVATE)
    fillet4_piece_11 = split(fillet4_piece_11, bisect_by=Plane(origin=(3.0000000000000027, 64.50000000114308, 5), z_dir=(1, -3e-17, 0)), keep=Keep.TOP, mode=Mode.PRIVATE)
    add(fillet4_piece_11, mode=Mode.SUBTRACT)
    with BuildSketch(Plane(origin=(69.5, 5.000000000000004, -2.4953413165722065), x_dir=(0, -1, 0), z_dir=(0, 0, 1))) as fillet4_piece_12:
        with BuildLine():
            CenterArc((0.9981365266288797, -1), FILLET4_R, 89.99999999999984, 89.56614602080991)
            Line((-0.00183480455002627, -0.992427891952218), (-0.10183193766791643, -0.9916706811474398))
            ThreePointArc((-0.10183193766791643, -0.9916706811474398), (-0.0999999999999952, -0.5078129768950106), (-0.09999999999999964, 0))
            Line((-0.09999999999999964, 0), (0, 0.09999999999999432))
            Line((0, 0.09999999999999432), (0.9981365266288824, 0.09999999999999432))
            Line((0.9981365266288824, 0.09999999999999432), (0.9981365266288824, 0))
        make_face()
    extrude(amount=9.990682633144413, mode=Mode.SUBTRACT)
    with BuildSketch(Plane(origin=(69.5, 5.000000000000004, 12.504658683427794), x_dir=(-0.9999982909664641, 0.0018488007331925382, 0), z_dir=(0, 0, 1))) as fillet4_piece_13:
        with BuildLine():
            CenterArc((0.9981529354241921, 0.9999836215132766), FILLET4_R, 180.10592853951772, 89.5661460208106)
            Line((-0.00184535554227194, 0.998134820780085), (-0.10184518463891266, 0.9979499407067657))
            Line((-0.10184518463891266, 0.9979499407067657), (-0.09999982909664072, -0.00018488007331924))
            Line((-0.09999982909664072, -0.00018488007331924), (0.00018488007331925, -0.09999982909664605))
            ThreePointArc((0.00018488007331925, -0.09999982909664605), (0.5079969890989224, -0.09906098409263343), (0.991857253310012, -0.09999836215132722))
            Line((0.991857253310012, -0.09999836215132722), (0.9924295880476661, 0))
        make_face()
    extrude(amount=9.990682633144415, mode=Mode.SUBTRACT)
    with BuildSketch(Plane(origin=(72, 5.000000000000004, 5), x_dir=(7e-17, -1, 0), z_dir=(-1, -7e-17, 0))) as fillet4_piece_14:
        with BuildLine():
            CenterArc((FILLET4_R, -FILLET4_R), FILLET4_R, 90, 90)
            Line((0, -FILLET4_R), (0, 0))
            Line((0, 0), (FILLET4_R, 0))
        make_face()
    extrude(amount=3.0078129768950106, mode=Mode.SUBTRACT)
    with BuildSketch(Plane(origin=(72, 5.000000000000004, 20), x_dir=(0, 0, -1), z_dir=(-1, -7e-17, 0))) as fillet4_piece_15:
        with BuildLine():
            CenterArc((FILLET4_R, FILLET4_R), FILLET4_R, 179.99999999999994, 90.00000000000006)
            Line((0, FILLET4_R), (0, 0))
            Line((0, 0), (FILLET4_R, 0))
        make_face()
    extrude(amount=3.0078129768950106, mode=Mode.SUBTRACT)
    with BuildSketch(Plane(origin=(72, 5.000000000000004, 15), x_dir=(7e-17, -1, 0), z_dir=(-1, -7e-17, 0))) as fillet4_piece_16:
        with BuildLine():
            CenterArc((FILLET4_R, FILLET4_R), FILLET4_R, 180, 90)
            Line((8.9e-16, FILLET4_R), (0, 0))
            Line((0, 0), (FILLET4_R, 0))
        make_face()
    extrude(amount=3.0078129768950106, mode=Mode.SUBTRACT)
    with BuildSketch(Plane(origin=(72, 5.000000000000004, 0), x_dir=(7e-17, -1, 0), z_dir=(-1, -7e-17, 0))) as fillet4_piece_17:
        with BuildLine():
            CenterArc((FILLET4_R, FILLET4_R), FILLET4_R, 180, 90)
            Line((0, FILLET4_R), (0, 0))
            Line((0, 0), (FILLET4_R, 0))
        make_face()
    extrude(amount=3.0078129768950106, mode=Mode.SUBTRACT)


solid = part.part
